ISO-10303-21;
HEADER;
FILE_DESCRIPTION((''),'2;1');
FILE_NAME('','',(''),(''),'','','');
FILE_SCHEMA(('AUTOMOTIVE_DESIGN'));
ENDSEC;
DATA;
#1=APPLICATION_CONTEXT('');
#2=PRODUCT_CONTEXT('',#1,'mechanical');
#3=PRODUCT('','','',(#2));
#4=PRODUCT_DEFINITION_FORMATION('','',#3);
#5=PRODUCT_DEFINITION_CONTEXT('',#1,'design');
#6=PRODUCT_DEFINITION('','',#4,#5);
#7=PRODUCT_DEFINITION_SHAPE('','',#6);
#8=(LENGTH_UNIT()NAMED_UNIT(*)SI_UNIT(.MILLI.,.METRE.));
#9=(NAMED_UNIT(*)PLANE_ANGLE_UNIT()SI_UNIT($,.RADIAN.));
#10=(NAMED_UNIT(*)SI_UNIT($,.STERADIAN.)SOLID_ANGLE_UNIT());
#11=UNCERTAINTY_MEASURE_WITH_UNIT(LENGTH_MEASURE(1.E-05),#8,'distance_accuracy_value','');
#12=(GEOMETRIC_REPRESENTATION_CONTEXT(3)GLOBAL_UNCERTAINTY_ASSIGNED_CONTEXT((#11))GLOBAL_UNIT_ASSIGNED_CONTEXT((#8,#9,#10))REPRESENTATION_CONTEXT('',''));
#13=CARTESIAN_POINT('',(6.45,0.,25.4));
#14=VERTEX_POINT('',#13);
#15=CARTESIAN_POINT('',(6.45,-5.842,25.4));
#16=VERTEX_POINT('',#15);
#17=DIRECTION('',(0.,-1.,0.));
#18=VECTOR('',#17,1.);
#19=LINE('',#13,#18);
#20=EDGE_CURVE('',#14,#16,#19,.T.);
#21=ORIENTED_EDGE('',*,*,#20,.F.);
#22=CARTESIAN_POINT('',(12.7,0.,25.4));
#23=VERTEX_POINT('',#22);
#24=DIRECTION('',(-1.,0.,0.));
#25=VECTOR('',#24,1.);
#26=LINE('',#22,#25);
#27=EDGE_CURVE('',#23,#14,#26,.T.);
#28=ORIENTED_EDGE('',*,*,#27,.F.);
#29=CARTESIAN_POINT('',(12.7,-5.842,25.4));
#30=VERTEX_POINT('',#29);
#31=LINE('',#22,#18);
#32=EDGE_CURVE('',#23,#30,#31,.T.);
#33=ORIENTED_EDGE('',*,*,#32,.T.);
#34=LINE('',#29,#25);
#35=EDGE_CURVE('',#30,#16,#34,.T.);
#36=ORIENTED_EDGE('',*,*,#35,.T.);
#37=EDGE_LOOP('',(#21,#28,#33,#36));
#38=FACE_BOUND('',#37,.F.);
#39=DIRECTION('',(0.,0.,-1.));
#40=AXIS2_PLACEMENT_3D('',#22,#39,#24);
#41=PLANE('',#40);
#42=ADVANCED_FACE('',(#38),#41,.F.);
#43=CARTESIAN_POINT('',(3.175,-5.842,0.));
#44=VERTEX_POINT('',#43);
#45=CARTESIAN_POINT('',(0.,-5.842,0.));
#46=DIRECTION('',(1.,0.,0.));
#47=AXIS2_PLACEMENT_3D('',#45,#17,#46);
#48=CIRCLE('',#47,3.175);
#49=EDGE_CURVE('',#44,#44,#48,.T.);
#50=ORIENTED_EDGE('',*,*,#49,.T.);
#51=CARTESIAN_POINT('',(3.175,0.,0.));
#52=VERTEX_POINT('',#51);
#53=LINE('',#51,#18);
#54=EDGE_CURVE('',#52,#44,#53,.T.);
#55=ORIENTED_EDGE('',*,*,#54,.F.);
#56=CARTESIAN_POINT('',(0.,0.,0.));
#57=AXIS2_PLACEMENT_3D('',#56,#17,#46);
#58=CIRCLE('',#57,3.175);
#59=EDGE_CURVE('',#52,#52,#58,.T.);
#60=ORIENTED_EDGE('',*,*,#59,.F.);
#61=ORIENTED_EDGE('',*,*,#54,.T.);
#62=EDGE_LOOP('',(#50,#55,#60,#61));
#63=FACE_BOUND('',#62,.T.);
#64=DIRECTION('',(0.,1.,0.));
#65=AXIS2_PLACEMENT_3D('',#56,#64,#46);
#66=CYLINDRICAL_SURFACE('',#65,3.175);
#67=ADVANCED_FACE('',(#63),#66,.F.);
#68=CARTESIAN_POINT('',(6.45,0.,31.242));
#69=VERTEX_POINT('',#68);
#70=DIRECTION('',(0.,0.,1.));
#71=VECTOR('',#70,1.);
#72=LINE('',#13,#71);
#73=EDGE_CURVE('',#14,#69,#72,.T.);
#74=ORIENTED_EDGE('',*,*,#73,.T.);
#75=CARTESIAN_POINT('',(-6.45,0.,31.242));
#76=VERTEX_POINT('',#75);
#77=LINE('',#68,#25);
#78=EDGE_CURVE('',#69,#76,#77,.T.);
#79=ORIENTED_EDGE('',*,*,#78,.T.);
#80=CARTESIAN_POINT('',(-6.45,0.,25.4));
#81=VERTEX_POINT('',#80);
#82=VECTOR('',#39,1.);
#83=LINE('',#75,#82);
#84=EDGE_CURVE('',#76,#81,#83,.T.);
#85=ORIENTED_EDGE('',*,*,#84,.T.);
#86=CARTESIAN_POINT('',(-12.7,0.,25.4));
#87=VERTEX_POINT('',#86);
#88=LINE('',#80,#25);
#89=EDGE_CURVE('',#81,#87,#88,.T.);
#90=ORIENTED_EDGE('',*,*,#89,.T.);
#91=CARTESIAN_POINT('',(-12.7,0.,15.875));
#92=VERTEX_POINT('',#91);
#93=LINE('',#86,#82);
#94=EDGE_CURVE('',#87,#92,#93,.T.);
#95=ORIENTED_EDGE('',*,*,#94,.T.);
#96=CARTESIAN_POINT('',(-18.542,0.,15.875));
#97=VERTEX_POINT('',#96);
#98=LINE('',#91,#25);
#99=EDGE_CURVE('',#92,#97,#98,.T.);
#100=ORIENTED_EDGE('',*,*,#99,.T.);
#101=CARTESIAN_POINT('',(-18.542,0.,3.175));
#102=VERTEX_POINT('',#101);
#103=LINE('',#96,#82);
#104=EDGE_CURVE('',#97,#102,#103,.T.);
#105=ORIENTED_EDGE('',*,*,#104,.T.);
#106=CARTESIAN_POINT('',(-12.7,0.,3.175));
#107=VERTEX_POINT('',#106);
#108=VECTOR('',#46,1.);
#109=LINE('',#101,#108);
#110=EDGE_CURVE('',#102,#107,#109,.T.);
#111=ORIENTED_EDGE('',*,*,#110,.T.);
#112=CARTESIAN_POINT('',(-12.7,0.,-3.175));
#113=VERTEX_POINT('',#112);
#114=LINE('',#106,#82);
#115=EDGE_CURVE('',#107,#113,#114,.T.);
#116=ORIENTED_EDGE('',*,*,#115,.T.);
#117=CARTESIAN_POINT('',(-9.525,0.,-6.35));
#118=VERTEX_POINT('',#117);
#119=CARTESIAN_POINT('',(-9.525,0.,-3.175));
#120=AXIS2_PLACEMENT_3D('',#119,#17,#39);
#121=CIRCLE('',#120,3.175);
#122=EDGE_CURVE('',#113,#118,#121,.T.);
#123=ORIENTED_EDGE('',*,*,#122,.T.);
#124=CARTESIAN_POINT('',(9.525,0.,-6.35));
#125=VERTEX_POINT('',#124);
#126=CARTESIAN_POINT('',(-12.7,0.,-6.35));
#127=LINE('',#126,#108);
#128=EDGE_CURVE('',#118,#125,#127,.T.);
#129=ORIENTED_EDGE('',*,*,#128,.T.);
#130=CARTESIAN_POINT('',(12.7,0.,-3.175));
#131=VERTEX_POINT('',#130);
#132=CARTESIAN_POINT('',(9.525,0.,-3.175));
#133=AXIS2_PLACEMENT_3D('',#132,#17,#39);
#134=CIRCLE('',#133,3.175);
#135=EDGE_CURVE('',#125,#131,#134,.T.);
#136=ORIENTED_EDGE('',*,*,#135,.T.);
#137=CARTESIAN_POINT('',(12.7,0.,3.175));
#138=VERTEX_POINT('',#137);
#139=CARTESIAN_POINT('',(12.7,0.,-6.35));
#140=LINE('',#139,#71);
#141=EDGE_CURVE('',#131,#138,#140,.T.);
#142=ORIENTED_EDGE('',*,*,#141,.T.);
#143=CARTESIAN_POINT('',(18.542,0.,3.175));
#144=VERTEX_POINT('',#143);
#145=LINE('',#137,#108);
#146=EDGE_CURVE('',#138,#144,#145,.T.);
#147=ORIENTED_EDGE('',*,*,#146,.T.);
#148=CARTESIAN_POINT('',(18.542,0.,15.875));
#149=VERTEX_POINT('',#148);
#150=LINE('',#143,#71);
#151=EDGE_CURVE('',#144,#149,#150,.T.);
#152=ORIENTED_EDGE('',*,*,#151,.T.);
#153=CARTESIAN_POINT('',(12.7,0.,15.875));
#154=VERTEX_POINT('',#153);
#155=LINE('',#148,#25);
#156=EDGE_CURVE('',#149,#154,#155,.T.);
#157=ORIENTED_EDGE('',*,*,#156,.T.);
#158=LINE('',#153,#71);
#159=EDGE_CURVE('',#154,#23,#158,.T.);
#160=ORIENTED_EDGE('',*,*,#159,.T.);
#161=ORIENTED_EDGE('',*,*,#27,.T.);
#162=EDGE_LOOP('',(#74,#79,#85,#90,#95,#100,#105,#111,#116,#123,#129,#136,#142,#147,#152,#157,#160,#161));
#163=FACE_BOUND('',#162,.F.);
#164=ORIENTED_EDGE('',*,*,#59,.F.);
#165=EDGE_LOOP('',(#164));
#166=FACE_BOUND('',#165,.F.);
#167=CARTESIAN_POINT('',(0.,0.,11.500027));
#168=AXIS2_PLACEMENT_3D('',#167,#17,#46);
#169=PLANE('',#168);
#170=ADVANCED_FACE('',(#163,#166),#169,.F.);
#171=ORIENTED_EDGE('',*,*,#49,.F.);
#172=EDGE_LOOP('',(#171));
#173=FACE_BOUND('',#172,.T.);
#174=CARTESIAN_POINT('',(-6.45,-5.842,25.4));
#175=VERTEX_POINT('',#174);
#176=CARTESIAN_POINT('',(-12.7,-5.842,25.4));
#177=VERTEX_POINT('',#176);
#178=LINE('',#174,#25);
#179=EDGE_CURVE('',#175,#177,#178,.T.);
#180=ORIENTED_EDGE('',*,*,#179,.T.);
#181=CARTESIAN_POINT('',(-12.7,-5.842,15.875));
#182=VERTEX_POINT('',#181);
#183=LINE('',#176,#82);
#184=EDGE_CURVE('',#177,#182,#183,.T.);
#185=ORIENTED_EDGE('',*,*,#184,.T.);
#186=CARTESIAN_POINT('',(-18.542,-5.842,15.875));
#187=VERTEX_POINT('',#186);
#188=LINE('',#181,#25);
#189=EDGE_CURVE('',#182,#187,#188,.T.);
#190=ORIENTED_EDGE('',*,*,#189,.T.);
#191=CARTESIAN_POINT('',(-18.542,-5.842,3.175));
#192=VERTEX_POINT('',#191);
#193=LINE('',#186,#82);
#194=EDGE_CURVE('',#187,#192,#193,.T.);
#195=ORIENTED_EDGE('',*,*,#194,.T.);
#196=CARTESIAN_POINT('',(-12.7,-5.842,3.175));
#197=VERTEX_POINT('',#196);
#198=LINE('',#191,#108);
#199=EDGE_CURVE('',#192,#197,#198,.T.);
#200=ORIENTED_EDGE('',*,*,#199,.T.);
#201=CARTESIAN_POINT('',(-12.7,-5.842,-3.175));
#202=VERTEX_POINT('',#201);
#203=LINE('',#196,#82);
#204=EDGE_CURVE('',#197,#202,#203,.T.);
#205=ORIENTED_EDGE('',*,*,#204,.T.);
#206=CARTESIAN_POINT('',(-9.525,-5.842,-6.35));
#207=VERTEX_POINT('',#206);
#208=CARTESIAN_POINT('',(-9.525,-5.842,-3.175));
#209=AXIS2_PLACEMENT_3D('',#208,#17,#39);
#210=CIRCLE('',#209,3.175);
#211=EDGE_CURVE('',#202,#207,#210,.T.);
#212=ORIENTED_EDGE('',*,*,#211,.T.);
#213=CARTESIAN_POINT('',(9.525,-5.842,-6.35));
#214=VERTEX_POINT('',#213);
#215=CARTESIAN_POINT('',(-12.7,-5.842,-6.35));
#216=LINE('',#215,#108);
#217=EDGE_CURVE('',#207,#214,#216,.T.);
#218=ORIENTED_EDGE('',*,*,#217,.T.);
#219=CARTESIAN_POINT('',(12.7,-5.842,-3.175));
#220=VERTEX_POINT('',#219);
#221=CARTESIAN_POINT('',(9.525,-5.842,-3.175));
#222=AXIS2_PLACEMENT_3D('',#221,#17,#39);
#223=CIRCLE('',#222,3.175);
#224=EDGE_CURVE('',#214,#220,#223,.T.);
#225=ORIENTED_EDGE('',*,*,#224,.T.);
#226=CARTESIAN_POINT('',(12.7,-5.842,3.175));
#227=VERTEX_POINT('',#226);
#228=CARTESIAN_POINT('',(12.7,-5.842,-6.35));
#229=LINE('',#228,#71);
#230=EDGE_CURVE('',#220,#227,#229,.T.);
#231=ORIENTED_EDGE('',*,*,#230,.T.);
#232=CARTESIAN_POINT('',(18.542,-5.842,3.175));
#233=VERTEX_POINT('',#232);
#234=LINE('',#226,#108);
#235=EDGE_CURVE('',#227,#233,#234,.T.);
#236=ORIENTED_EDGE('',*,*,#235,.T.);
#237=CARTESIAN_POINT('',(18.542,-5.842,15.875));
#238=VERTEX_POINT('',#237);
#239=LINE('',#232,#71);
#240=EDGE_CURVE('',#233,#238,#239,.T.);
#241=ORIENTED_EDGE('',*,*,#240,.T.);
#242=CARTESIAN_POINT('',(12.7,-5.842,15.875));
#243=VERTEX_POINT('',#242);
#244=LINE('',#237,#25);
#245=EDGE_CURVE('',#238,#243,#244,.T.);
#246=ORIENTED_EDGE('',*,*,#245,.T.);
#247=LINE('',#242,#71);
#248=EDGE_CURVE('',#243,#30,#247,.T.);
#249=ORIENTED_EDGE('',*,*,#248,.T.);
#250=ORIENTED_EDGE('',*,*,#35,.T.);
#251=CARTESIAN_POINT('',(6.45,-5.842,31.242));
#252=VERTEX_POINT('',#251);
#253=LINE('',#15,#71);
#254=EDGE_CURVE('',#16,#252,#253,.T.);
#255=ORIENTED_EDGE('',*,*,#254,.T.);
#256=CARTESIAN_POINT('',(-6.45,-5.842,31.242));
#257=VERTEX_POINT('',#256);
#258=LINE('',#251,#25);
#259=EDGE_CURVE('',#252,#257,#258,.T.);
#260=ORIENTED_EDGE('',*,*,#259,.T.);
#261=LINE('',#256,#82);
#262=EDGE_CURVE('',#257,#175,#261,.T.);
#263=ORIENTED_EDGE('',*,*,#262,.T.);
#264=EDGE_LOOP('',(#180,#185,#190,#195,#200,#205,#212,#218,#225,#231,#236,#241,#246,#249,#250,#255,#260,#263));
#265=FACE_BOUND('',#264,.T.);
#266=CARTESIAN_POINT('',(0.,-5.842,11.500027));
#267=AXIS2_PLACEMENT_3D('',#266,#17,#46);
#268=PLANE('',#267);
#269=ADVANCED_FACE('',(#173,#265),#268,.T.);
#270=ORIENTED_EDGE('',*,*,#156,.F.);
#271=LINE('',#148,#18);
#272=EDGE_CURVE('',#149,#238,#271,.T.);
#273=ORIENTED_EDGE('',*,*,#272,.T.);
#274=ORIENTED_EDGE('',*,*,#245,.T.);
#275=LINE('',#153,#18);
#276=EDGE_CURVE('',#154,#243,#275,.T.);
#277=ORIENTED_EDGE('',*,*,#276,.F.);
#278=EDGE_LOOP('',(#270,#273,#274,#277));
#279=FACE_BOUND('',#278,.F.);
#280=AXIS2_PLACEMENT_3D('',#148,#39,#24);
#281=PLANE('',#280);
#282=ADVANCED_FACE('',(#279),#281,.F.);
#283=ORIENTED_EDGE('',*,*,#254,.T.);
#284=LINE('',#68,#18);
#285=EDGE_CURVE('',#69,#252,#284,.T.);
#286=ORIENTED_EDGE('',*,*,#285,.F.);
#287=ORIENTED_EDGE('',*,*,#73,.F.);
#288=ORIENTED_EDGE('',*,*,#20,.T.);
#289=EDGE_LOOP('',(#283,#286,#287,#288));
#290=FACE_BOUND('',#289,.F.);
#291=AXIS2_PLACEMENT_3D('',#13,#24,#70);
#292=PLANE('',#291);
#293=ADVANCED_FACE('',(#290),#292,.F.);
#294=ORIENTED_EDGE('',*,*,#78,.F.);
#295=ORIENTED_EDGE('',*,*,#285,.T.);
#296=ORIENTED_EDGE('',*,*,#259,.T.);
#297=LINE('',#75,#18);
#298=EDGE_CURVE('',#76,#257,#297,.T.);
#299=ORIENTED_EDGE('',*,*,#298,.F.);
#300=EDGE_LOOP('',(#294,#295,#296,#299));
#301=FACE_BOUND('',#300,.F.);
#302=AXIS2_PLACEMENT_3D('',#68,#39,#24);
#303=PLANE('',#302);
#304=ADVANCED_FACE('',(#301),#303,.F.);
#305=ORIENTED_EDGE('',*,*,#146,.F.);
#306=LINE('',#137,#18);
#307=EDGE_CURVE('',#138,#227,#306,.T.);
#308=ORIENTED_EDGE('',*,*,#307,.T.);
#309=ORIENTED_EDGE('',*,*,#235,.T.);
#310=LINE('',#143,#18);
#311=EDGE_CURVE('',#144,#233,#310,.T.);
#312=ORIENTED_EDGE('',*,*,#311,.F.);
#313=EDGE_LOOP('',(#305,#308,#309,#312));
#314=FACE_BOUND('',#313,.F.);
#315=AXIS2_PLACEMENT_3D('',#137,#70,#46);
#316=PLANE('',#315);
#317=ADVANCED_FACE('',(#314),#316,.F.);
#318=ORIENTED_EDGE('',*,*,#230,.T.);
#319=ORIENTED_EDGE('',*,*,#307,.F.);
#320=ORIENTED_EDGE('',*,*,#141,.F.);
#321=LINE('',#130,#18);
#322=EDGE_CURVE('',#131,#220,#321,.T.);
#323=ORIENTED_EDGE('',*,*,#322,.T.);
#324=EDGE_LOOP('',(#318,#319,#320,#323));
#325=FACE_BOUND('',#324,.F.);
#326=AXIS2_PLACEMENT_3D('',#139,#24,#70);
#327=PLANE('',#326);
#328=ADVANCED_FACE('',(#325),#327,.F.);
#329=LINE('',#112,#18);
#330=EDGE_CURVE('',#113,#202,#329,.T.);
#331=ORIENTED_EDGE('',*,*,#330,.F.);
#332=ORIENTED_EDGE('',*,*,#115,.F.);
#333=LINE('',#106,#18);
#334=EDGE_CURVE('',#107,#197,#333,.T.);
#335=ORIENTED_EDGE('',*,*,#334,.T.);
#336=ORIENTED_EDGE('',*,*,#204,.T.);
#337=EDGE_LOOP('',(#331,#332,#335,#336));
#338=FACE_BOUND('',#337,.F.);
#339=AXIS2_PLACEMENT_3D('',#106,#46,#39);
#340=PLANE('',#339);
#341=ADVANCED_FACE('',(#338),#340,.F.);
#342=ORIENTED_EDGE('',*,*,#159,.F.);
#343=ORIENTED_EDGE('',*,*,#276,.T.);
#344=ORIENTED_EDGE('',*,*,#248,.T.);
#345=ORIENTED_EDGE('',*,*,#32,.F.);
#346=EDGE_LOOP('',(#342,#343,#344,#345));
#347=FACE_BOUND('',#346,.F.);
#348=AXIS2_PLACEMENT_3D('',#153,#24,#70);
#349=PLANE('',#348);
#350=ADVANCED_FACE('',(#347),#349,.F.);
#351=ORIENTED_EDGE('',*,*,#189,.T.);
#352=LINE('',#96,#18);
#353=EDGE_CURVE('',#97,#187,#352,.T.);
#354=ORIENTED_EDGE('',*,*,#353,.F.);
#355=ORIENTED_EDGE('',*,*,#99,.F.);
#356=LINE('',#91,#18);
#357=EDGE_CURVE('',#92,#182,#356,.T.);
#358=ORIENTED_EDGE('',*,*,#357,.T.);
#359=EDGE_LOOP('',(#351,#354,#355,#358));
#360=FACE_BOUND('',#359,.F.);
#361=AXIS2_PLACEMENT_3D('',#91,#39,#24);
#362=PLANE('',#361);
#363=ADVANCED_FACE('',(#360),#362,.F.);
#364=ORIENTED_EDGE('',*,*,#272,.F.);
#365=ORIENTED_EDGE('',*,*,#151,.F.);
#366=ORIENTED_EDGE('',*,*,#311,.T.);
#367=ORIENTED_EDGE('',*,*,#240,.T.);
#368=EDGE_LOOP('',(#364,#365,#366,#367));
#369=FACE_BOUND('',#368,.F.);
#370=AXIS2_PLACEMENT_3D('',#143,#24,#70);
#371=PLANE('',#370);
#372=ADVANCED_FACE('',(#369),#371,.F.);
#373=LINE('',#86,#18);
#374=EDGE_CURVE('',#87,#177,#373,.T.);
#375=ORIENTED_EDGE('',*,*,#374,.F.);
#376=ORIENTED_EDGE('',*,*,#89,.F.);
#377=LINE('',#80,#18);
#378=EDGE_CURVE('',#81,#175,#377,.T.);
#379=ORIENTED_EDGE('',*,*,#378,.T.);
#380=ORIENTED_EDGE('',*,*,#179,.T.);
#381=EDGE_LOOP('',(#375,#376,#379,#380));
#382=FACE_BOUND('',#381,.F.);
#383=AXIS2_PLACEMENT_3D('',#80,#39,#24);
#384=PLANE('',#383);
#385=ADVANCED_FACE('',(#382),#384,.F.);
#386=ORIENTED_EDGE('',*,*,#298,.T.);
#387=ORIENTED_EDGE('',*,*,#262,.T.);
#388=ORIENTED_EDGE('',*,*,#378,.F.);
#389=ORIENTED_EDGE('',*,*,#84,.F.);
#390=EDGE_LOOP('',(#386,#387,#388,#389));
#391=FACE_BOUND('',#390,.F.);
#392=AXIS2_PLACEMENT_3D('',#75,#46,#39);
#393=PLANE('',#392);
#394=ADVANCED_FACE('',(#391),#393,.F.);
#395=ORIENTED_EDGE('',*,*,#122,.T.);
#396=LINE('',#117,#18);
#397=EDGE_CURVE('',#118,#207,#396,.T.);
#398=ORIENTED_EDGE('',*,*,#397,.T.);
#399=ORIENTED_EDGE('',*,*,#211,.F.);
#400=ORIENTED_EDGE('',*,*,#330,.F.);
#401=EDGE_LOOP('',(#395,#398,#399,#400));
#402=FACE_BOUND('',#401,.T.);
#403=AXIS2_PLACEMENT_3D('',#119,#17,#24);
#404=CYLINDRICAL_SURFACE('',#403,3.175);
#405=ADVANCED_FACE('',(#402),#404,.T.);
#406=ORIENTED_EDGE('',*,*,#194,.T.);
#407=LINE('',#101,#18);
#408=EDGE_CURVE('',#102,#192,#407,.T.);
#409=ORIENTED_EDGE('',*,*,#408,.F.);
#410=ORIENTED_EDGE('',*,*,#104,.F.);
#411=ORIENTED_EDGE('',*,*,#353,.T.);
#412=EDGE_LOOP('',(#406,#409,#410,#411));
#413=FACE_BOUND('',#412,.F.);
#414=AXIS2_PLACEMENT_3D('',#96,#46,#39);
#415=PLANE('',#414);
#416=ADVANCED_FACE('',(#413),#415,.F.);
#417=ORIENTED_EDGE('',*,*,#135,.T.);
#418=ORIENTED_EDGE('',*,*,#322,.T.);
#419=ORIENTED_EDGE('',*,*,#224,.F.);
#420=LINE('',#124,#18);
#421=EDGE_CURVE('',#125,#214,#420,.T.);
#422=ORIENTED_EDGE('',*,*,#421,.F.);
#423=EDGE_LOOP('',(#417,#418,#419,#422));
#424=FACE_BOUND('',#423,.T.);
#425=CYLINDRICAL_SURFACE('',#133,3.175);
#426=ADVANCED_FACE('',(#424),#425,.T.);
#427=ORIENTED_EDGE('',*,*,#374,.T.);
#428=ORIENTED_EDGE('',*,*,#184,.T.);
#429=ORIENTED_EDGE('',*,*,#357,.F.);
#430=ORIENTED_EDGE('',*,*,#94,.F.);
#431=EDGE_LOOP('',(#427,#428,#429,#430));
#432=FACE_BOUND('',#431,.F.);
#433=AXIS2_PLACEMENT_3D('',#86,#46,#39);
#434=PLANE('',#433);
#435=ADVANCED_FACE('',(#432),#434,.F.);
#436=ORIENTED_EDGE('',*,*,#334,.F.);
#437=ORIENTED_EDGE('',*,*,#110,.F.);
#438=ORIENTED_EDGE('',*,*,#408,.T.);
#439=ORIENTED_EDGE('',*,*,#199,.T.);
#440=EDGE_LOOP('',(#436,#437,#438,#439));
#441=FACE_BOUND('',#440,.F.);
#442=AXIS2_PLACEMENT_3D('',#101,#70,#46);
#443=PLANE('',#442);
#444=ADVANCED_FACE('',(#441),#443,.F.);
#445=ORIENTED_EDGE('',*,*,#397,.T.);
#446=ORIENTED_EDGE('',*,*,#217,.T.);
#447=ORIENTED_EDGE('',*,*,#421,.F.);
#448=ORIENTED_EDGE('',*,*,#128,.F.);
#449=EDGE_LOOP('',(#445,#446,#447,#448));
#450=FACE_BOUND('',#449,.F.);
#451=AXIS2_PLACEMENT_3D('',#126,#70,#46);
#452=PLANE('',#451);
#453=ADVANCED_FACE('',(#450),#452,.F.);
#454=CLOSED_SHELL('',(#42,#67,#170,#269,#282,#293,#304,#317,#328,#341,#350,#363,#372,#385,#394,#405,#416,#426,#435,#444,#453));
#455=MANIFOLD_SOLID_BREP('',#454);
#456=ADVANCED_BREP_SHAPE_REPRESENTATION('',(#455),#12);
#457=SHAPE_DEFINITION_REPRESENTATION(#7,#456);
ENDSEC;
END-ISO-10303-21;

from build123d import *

# Parameters (mm, degrees)
F0_R     = 3.175
F1_DEPTH = 5.842
F2_R     = 3.175


with BuildPart() as f1:
    # F0 (on Front) → F1 (new body)
    with BuildSketch(Plane.XZ):
        Polygon((-12.7, 3.175), (-12.7, -6.35), (12.7, -6.35), (12.7, 3.175), (18.542, 3.175), (18.542, 15.875), (12.7, 15.875), (12.7, 25.4), (6.45, 25.4), (6.45, 31.242), (-6.45, 31.242), (-6.45, 25.4), (-12.7, 25.4), (-12.7, 15.875), (-18.542, 15.875), (-18.542, 3.175), align=None)
        Circle(F0_R, mode=Mode.SUBTRACT)
    extrude(amount=F1_DEPTH)

    # F2
    f2_edges = [f1.edges().sort_by_distance(p)[0] for p in [
        (-12.7, -2.921, -6.35),
        (12.7, -2.921, -6.35),
    ]]
    fillet(f2_edges, radius=F2_R)


solid = f1.part
